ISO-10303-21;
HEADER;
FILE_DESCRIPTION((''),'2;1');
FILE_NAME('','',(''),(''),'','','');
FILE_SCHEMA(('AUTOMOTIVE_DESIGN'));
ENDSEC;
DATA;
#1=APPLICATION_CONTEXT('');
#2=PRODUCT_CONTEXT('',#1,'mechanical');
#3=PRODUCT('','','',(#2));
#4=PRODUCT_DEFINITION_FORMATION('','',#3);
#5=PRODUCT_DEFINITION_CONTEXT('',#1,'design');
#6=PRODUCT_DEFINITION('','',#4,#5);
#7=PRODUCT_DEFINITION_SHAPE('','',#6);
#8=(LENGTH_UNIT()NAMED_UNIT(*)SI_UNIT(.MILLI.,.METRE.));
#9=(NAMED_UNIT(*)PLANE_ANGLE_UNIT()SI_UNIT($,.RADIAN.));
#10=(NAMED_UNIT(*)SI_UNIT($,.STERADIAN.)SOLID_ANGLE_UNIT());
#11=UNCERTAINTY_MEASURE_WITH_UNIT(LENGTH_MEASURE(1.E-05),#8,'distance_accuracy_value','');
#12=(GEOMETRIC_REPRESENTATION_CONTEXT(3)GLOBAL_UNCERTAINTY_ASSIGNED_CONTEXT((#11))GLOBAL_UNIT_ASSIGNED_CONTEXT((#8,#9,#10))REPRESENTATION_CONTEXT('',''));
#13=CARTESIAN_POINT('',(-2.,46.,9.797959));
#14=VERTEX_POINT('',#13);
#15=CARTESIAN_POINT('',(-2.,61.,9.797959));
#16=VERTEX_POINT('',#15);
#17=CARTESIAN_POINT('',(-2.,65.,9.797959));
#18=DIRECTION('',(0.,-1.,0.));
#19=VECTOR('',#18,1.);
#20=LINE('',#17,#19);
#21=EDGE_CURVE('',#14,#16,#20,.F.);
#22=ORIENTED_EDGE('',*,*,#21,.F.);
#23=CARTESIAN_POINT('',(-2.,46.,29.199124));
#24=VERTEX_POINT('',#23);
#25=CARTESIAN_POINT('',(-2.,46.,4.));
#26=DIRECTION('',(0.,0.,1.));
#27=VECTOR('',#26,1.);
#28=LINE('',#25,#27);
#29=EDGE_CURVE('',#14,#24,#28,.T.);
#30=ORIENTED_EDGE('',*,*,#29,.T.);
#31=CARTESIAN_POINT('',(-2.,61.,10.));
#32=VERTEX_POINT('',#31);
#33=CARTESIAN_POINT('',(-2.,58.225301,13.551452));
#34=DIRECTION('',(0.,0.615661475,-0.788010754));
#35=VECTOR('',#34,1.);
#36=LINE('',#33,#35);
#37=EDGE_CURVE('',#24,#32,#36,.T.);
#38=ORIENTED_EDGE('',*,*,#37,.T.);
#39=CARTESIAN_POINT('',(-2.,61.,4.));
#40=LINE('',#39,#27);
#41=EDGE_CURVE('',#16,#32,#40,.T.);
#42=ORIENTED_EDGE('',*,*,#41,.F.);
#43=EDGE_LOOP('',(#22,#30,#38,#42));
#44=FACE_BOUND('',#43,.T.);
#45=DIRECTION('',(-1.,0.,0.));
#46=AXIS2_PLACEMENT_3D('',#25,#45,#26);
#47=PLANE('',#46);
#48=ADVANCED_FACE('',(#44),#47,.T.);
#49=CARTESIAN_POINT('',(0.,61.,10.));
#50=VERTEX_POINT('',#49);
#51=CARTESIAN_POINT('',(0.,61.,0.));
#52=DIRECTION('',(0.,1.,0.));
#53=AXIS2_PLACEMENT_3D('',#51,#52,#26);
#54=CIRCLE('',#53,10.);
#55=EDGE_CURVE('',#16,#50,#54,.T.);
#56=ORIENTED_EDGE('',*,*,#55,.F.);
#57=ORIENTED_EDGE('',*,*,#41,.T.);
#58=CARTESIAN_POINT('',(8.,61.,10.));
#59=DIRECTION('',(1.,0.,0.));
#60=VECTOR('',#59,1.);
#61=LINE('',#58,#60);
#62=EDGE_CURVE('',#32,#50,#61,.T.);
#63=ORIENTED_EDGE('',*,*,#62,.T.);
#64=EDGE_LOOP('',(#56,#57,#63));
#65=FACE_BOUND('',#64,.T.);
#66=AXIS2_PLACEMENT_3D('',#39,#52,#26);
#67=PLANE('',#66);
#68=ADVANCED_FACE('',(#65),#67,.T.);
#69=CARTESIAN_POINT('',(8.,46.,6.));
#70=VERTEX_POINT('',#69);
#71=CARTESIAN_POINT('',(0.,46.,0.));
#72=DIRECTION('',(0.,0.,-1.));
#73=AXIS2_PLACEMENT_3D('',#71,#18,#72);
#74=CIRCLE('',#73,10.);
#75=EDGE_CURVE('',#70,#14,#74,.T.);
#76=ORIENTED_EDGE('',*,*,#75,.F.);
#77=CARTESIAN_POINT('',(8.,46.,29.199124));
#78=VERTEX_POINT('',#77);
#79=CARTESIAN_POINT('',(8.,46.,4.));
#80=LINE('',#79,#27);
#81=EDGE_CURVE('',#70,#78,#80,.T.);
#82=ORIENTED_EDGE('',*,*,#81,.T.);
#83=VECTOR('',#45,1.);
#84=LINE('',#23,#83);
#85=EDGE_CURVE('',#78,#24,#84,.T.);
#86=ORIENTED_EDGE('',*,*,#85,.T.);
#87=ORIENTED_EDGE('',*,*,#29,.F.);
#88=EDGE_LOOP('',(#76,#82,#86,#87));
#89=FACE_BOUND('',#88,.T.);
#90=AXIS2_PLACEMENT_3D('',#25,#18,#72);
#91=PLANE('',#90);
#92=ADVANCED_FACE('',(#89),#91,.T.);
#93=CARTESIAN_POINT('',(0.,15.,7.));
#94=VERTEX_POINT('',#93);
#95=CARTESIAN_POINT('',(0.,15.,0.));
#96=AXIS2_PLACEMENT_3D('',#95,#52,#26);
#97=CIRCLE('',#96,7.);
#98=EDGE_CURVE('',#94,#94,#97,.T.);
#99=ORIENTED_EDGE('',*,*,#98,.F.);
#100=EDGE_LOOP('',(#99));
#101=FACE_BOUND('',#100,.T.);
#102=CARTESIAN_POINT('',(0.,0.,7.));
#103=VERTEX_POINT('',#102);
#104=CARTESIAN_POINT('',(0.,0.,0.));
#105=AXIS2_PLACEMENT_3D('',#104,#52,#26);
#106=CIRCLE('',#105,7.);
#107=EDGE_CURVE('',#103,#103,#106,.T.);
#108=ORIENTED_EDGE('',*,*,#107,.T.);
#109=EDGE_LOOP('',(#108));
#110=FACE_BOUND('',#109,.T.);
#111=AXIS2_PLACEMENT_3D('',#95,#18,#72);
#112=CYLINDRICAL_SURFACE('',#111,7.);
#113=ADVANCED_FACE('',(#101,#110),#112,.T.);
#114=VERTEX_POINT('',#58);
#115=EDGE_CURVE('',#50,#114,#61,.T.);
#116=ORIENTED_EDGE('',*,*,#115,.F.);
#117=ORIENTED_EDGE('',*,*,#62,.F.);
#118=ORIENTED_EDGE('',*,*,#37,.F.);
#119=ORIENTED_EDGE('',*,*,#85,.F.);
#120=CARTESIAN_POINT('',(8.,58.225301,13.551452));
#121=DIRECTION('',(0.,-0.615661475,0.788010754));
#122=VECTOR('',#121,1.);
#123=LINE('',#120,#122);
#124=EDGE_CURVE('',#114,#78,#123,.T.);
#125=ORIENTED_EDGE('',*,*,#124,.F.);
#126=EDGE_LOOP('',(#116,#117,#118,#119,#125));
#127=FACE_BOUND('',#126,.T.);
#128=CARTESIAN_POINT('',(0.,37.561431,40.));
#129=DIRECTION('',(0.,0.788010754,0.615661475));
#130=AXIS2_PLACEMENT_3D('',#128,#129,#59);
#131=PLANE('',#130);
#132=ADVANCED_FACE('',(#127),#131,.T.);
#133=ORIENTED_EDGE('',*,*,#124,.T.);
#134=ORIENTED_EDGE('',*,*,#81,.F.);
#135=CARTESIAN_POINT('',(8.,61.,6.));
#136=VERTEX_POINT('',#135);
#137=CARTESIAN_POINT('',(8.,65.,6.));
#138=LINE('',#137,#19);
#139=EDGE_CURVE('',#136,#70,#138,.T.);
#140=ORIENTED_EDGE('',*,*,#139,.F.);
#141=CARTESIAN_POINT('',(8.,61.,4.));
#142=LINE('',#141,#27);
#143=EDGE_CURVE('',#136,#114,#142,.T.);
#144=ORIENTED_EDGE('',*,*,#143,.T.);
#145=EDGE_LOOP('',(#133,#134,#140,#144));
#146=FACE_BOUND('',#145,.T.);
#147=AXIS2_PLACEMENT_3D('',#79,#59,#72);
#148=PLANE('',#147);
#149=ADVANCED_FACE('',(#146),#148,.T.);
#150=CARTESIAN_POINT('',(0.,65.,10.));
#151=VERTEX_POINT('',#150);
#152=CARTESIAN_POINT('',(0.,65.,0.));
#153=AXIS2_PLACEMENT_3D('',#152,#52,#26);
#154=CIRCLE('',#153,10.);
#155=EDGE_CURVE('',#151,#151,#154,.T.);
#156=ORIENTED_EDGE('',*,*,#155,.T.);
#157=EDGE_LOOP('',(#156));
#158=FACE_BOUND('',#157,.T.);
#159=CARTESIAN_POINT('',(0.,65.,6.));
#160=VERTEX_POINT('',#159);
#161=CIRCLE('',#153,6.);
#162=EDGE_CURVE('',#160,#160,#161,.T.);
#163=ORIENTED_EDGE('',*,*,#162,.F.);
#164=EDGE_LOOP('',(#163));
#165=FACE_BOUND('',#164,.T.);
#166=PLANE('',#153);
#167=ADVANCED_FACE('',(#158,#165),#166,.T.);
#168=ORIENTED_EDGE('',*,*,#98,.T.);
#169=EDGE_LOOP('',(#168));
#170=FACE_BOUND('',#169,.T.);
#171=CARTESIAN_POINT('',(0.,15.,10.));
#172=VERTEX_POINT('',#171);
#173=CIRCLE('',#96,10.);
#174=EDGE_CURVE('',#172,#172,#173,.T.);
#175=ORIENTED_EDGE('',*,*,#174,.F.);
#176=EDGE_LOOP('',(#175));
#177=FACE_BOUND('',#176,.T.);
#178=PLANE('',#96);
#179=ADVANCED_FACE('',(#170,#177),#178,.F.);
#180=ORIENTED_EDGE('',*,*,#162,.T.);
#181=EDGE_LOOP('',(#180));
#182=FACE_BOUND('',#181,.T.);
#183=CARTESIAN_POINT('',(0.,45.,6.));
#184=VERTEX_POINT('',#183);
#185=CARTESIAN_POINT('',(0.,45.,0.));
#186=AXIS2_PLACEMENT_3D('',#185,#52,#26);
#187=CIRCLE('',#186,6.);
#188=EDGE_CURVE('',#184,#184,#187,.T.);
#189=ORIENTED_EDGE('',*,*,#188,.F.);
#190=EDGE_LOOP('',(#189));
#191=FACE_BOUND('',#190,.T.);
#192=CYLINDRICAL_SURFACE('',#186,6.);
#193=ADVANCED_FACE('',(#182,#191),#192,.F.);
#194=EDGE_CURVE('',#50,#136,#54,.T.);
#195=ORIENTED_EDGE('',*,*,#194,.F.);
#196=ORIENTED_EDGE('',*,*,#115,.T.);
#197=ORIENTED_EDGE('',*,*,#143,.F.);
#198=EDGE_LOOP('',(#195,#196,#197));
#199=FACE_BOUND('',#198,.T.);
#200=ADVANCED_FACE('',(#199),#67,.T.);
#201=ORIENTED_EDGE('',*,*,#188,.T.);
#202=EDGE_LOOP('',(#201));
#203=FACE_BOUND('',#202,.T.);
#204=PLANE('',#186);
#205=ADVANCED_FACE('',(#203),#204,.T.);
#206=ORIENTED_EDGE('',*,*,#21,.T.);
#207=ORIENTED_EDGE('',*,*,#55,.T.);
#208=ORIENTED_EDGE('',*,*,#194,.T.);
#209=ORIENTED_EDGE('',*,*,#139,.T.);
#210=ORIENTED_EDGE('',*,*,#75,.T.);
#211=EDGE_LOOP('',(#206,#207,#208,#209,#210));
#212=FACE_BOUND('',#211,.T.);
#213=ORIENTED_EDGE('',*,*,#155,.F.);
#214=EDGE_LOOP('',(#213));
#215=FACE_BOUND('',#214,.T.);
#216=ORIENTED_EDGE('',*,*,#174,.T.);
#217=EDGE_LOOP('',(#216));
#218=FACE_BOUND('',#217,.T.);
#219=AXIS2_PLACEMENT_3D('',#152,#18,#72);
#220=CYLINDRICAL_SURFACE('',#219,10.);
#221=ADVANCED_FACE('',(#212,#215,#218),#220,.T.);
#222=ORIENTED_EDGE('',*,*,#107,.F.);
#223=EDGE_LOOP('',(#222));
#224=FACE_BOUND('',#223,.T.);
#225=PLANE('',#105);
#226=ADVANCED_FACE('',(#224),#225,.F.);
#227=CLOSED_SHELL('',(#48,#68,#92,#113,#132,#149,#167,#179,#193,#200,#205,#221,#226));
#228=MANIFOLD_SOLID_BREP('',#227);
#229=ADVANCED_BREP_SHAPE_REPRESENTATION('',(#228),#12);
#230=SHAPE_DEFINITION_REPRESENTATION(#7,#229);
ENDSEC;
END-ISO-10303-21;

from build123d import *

# Parameters (mm, degrees)
CROQUIS1_R                   = 7
SALIENTE_EXTRUIR1_DEPTH      = 15
CROQUIS2_R                   = 10
SALIENTE_EXTRUIR2_DEPTH      = 50
SALIENTE_EXTRUIR3_DEPTH      = 30
SALIENTE_EXTRUIR3_DEPTH_BACK = 6
CROQUIS3_W                   = 10
CROQUIS3_H                   = 15
CHAFL_N1_SIZE                = 30
CHAFL_N1_SIZE_2              = 23.438568795
CROQUIS4_R                   = 6
CORTAR_EXTRUIR1_DEPTH        = 20


with BuildPart() as part:
    # Croquis1 → Saliente-Extruir1 (new body)
    with BuildSketch(Plane(origin=(0, 0, 0), x_dir=(1, 0, 0), z_dir=(0, 1, 0))):
        with Locations(Location((0, 0, 0), (0, 0, 270))):
            Circle(CROQUIS1_R)
    extrude(amount=SALIENTE_EXTRUIR1_DEPTH)

    # Croquis2 → Saliente-Extruir2 (add)
    with BuildSketch(Plane(origin=(0, 15, 0), x_dir=(1, 0, 0), z_dir=(0, 1, 0))):
        with Locations(Location((0, 0, 0), (0, 0, 270))):
            Circle(CROQUIS2_R)
    extrude(amount=SALIENTE_EXTRUIR2_DEPTH)

    # Croquis3 → Saliente-Extruir3 (add, two sides: drawn at the far end of the back side and taken through both)
    with BuildSketch(Plane.XY.offset(10).offset(-SALIENTE_EXTRUIR3_DEPTH_BACK)):
        with Locations((3, 53.5)):
            Rectangle(CROQUIS3_W, CROQUIS3_H)
    extrude(amount=SALIENTE_EXTRUIR3_DEPTH + SALIENTE_EXTRUIR3_DEPTH_BACK)

    # Chaflán1
    # the kernel refuses this chamfer: 30, 23.438568795 mm, written as the material it takes off along each edge
    with BuildSketch(Plane(origin=(85.38607652, 61, 40), x_dir=(0, 0.023867141339117135, -0.9997151392093142), z_dir=(-1, 0, 0))) as chafl_n1_piece_1_section:
        Polygon((CHAFL_N1_SIZE * 0.999715139209, CHAFL_N1_SIZE * 0.0238671413391), (-CHAFL_N1_SIZE_2 * 0.0238671413393, CHAFL_N1_SIZE_2 * 0.999715139218), (0, 0), align=None)
    chafl_n1_piece_1 = extrude(amount=164.77215304, mode=Mode.PRIVATE)
    chafl_n1_piece_1 = chafl_n1_piece_1 - Plane(origin=(0, 53.349255428, 0), x_dir=(0, 0, 1), z_dir=(0, -1, 0)) * Cylinder(10, 450, mode=Mode.PRIVATE)
    add(chafl_n1_piece_1, mode=Mode.SUBTRACT)

    # Croquis4 → Cortar-Extruir1 (cut)
    with BuildSketch(Plane(origin=(0, 65, 0), x_dir=(1, 0, 0), z_dir=(0, 1, 0))):
        with Locations(Location((0, 0, 0), (0, 0, 270))):
            Circle(CROQUIS4_R)
    extrude(amount=-CORTAR_EXTRUIR1_DEPTH, mode=Mode.SUBTRACT)


solid = part.part
